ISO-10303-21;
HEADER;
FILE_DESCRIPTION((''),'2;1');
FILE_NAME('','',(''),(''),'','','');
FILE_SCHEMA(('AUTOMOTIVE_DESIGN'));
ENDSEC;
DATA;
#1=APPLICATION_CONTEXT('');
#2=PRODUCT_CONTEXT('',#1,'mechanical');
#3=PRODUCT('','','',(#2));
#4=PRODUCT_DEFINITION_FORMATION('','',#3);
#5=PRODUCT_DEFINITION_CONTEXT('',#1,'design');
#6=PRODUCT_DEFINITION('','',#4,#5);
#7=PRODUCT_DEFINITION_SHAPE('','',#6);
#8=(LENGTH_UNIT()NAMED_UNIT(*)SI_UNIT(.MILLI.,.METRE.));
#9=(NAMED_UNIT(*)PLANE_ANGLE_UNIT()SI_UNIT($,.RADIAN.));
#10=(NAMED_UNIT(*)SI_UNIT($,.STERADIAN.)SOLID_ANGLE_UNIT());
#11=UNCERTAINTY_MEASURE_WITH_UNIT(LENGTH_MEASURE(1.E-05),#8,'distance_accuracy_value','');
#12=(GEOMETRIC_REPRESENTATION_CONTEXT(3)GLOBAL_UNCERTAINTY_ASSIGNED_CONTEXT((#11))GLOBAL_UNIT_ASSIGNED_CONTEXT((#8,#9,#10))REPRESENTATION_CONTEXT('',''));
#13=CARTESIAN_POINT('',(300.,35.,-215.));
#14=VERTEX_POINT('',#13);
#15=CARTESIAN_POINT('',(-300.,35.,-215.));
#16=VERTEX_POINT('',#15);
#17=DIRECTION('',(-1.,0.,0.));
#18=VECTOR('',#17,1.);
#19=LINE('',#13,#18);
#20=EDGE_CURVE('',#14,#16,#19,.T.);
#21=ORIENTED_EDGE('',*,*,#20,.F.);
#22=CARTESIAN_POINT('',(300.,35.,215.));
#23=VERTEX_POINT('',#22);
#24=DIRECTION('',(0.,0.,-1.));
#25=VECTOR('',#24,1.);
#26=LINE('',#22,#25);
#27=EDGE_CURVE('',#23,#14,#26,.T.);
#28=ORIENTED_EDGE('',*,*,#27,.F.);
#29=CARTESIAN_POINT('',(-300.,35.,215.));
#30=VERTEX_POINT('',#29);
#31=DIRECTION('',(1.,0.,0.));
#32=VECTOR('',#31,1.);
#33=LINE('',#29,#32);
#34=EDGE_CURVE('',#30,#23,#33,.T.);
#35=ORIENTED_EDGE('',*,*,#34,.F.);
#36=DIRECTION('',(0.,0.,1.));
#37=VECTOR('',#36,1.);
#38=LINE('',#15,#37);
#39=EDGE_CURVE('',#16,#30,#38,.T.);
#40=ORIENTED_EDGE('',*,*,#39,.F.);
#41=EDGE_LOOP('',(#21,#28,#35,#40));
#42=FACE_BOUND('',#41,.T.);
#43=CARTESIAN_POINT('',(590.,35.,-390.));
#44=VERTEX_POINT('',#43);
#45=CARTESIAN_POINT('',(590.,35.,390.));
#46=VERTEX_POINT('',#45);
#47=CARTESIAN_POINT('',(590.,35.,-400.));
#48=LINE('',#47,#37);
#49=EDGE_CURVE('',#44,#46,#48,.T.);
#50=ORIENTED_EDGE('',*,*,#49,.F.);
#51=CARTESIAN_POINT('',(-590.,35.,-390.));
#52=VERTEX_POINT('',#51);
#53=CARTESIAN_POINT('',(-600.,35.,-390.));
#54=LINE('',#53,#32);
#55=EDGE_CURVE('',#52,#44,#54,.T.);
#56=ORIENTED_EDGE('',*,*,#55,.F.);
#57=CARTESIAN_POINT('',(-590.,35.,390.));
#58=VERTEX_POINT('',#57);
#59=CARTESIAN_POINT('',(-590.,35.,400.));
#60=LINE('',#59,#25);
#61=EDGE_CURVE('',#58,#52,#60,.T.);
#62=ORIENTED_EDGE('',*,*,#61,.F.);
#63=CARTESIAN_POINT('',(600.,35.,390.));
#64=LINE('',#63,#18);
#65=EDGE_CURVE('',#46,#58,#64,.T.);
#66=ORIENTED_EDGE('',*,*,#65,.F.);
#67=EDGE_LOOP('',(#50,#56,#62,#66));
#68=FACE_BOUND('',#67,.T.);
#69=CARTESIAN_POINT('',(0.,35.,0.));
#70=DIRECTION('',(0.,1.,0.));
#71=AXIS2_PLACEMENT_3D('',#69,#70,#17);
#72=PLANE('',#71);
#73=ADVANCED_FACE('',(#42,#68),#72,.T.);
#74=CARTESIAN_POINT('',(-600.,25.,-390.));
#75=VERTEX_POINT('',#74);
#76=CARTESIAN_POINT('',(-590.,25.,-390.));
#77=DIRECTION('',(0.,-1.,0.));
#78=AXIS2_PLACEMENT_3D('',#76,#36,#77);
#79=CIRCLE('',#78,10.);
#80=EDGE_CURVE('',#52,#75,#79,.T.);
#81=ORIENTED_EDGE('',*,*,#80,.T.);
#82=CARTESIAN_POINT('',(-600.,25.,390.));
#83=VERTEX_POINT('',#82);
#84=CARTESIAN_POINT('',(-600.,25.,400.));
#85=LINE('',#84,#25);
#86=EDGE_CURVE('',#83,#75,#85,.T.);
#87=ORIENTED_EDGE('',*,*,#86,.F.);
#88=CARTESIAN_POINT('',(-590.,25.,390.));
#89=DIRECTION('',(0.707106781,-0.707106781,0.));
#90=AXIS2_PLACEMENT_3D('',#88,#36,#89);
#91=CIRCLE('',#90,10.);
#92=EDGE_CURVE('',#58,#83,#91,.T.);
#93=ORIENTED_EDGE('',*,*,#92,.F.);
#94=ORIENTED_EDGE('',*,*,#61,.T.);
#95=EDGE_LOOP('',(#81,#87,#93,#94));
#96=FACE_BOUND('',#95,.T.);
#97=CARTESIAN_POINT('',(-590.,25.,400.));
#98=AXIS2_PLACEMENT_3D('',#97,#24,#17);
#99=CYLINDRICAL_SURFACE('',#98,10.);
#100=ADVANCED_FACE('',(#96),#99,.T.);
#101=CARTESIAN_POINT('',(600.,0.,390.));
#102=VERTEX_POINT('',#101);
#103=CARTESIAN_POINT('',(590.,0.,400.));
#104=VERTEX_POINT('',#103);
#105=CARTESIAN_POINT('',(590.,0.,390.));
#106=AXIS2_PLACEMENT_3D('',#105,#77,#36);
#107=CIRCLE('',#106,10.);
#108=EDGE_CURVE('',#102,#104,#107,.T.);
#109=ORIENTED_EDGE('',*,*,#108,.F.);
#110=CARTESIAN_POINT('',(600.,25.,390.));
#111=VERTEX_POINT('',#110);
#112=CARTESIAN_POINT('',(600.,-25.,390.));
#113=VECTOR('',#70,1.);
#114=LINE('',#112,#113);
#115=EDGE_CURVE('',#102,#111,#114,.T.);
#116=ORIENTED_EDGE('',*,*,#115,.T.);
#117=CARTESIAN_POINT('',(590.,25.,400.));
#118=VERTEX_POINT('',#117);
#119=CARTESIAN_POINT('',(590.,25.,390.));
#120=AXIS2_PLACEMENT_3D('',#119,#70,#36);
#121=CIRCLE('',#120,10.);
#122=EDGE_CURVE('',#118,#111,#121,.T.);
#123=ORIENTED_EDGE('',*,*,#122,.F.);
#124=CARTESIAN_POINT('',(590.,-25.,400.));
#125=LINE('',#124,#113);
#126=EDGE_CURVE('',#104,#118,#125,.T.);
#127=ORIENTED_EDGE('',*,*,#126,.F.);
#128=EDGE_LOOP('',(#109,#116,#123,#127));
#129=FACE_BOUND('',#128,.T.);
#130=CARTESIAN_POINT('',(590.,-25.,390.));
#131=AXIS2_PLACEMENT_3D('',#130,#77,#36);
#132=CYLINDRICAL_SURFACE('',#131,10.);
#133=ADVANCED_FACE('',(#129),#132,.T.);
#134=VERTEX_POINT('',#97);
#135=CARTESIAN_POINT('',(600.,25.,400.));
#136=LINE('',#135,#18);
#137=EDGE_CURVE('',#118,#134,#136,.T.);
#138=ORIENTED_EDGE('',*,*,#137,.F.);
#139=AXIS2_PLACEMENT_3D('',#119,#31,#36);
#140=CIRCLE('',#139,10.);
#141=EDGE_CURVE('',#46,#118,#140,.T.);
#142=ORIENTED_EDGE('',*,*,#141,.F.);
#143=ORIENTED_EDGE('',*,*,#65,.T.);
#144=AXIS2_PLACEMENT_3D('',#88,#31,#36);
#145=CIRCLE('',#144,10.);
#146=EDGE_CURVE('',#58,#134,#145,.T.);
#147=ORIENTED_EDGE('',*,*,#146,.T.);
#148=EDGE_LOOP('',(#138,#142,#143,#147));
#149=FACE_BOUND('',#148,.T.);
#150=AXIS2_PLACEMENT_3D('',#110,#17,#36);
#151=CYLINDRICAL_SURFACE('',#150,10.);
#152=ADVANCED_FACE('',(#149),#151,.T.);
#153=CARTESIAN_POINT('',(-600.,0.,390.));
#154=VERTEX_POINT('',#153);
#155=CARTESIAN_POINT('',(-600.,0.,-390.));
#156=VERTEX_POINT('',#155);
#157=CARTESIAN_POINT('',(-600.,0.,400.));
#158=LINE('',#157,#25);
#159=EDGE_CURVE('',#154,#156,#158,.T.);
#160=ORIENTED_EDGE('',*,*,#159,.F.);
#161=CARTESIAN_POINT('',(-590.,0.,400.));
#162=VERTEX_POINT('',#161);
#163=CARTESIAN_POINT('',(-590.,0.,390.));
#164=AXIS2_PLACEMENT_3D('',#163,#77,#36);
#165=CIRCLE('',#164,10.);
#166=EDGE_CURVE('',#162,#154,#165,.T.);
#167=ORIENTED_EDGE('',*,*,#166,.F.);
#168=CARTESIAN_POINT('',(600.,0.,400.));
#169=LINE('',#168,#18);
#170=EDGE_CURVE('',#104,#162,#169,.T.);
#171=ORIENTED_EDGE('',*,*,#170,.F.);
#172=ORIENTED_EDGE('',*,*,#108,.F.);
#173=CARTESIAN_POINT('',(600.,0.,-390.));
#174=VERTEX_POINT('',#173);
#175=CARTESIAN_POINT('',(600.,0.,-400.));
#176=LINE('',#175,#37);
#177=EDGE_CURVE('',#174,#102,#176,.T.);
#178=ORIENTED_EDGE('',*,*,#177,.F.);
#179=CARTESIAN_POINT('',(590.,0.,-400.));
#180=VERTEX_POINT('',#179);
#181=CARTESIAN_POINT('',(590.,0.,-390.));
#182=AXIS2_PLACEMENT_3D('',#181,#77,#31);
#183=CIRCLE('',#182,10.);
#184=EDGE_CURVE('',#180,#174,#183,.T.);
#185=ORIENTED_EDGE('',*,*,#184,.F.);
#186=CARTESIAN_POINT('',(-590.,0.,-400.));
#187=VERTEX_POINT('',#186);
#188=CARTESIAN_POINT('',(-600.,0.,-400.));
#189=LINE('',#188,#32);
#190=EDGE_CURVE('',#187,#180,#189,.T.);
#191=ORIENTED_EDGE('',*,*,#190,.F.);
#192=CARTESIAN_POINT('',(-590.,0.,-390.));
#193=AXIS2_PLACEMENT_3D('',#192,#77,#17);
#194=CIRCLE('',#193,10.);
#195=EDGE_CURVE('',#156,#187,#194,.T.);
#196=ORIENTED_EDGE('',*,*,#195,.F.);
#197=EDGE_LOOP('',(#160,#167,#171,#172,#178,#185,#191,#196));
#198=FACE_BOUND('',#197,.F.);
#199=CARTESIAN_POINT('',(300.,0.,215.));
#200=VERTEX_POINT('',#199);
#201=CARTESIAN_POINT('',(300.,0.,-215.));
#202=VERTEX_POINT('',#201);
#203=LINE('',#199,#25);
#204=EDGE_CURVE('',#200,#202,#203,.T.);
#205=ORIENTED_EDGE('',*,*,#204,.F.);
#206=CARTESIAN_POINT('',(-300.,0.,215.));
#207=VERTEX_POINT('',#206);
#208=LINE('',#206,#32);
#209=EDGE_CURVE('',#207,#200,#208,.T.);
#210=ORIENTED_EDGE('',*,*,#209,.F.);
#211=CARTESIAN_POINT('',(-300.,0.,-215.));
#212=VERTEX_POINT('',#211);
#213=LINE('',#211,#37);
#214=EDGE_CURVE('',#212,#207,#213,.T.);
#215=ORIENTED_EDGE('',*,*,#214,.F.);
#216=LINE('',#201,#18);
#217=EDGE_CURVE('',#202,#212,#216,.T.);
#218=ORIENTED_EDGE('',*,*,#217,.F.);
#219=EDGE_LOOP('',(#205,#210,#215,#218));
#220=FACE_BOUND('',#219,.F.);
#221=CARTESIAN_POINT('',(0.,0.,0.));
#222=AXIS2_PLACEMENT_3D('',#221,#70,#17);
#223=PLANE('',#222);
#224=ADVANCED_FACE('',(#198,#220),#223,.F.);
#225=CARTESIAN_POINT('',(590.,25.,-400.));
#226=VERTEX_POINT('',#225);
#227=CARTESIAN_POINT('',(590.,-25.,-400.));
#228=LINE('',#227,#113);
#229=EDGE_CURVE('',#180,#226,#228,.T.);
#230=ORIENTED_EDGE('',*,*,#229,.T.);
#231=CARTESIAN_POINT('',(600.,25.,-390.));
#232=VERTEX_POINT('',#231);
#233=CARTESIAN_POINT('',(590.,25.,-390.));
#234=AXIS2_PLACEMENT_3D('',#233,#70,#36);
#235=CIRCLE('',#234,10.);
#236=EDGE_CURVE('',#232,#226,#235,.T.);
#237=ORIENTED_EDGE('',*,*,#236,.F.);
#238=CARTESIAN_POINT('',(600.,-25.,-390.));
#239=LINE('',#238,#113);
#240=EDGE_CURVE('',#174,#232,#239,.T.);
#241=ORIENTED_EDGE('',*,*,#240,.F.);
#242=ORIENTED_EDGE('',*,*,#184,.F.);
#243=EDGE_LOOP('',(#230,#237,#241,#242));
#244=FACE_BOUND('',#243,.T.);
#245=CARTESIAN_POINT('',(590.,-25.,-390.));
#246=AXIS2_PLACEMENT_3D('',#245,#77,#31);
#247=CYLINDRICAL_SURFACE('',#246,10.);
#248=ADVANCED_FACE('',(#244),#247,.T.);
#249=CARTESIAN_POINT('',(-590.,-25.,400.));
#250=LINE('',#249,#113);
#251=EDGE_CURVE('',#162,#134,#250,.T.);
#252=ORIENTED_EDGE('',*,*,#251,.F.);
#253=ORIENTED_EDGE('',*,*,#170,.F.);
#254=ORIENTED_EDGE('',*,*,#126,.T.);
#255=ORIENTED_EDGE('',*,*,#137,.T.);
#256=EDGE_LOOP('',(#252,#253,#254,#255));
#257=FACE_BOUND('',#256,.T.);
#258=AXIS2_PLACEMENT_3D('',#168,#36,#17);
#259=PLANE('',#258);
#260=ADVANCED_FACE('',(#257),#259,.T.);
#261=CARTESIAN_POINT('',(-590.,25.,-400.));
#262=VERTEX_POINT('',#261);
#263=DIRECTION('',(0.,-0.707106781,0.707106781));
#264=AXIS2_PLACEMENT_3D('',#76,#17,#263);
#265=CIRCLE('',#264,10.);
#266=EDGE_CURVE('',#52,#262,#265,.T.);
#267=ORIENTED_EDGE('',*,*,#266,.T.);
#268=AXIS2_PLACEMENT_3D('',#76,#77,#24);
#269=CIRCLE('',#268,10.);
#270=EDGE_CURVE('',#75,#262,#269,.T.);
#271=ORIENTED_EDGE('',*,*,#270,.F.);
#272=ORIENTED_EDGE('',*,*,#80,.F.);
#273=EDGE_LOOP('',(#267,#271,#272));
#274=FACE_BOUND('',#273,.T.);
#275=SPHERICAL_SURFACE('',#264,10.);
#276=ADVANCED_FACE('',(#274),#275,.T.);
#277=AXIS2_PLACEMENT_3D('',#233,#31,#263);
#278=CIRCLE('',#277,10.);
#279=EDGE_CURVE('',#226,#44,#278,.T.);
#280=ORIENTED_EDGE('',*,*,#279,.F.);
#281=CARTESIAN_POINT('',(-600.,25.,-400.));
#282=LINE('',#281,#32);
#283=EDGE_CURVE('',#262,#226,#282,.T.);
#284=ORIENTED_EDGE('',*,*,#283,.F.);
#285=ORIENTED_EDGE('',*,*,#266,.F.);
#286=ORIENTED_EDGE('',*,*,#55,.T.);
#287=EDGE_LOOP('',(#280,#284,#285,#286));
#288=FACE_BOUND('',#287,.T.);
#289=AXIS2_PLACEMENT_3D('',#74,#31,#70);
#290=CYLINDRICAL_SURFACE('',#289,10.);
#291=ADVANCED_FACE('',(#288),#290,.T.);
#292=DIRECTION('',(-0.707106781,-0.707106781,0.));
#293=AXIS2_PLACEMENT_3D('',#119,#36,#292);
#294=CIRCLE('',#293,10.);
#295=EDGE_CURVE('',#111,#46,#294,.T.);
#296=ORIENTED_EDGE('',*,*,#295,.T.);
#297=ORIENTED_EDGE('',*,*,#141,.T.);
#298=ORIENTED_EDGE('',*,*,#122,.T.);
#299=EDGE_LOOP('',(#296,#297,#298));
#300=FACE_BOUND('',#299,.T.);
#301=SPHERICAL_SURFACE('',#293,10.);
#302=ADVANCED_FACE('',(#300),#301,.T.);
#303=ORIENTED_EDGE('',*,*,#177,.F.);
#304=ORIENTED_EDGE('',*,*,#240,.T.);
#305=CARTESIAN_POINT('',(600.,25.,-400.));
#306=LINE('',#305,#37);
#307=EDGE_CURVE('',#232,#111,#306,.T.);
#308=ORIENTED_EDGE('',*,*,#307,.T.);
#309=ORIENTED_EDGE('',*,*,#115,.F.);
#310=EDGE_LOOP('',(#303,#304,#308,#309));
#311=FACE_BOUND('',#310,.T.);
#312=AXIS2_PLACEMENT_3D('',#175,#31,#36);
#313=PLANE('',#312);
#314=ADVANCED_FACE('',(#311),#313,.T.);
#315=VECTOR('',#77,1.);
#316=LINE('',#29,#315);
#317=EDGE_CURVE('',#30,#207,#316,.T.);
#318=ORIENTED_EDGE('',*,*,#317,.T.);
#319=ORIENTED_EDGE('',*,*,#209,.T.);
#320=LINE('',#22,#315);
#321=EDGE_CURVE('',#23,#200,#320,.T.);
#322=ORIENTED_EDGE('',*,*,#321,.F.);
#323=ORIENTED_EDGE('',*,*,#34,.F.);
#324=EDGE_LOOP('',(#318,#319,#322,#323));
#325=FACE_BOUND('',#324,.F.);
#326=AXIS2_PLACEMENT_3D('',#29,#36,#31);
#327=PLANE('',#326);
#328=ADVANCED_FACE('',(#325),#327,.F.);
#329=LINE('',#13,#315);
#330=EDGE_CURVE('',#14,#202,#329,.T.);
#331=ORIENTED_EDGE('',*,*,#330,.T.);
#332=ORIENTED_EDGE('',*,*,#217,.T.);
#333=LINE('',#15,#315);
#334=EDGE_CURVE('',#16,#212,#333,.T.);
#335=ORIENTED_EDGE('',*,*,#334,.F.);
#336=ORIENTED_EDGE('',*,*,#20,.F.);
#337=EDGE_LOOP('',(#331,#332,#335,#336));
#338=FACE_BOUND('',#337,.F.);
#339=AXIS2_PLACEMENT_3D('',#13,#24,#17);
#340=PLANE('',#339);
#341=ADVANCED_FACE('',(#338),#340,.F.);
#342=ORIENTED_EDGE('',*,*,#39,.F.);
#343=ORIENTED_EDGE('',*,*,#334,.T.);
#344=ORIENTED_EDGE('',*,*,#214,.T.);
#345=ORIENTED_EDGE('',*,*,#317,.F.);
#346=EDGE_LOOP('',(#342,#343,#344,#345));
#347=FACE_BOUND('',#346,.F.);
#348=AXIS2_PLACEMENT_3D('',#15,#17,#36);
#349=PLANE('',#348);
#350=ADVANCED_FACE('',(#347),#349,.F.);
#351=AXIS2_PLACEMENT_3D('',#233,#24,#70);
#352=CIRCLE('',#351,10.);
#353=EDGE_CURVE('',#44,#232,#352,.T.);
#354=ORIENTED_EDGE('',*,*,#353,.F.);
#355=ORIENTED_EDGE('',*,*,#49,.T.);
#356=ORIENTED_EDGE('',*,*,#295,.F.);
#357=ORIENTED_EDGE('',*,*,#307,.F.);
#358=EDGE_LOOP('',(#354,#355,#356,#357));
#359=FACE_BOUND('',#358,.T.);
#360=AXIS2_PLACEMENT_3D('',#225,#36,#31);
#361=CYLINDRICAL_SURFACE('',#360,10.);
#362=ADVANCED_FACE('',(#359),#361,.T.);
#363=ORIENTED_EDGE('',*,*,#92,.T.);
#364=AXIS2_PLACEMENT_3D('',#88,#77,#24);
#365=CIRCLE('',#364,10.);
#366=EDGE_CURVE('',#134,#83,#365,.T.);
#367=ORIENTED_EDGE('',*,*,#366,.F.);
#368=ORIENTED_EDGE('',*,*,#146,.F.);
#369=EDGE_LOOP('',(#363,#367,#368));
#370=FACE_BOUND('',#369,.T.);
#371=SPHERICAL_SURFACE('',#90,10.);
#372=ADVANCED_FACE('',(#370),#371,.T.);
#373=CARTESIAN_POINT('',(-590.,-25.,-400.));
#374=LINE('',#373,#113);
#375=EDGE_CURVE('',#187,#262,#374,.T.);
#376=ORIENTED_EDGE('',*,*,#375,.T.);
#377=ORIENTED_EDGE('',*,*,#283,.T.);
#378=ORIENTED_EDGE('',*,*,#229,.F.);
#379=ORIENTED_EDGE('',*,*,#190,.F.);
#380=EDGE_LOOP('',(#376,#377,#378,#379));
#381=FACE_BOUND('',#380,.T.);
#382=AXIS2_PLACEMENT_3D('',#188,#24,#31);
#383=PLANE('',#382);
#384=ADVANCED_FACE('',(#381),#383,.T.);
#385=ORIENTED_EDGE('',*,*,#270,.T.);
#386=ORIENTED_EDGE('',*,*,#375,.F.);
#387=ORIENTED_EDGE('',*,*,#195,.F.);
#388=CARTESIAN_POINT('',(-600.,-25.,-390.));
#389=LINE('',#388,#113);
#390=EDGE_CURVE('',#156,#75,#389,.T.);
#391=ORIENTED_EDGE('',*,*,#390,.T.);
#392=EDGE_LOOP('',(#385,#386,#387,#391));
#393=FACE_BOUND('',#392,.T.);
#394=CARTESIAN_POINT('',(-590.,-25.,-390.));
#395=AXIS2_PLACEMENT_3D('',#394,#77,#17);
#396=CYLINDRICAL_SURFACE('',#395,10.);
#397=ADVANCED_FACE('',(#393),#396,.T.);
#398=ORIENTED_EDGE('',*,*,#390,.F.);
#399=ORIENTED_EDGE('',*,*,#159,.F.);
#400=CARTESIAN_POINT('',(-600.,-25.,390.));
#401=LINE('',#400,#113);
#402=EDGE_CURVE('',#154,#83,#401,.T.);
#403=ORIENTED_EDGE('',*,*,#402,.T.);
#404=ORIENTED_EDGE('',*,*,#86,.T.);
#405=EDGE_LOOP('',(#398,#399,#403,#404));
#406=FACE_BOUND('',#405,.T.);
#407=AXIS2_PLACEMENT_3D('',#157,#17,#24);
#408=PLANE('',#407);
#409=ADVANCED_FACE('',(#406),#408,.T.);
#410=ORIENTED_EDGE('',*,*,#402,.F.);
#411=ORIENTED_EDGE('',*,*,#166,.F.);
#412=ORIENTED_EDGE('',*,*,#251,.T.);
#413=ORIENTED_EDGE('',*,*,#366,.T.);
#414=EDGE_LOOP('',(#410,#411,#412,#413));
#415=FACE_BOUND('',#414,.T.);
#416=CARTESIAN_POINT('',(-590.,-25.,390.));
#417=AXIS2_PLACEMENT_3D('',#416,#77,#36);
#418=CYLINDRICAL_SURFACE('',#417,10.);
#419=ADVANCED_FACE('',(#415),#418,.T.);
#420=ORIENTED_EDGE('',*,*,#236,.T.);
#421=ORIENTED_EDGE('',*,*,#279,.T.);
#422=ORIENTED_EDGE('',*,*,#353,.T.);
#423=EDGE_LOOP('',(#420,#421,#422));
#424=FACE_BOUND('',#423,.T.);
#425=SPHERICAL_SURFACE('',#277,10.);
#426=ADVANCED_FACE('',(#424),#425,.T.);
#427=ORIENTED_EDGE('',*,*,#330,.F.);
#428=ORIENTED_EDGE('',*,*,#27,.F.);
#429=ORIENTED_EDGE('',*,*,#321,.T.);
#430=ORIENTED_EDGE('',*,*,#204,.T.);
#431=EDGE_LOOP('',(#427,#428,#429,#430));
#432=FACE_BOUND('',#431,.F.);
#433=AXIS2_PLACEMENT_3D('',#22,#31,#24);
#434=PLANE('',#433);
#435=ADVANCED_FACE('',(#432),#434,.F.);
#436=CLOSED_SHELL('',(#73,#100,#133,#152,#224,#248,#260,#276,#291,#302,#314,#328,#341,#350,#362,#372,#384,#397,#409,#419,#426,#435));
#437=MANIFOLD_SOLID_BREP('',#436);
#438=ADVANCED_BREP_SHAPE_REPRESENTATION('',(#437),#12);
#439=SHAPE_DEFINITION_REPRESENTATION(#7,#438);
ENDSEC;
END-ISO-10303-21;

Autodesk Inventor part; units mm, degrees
ref_plane "YZ Plane" through (0, 0, 0) normal (1, 0, 0) x (0, 1, 0)
ref_plane "XZ Plane" through (0, 0, 0) normal (0, 1, 0) x (-1, 0, 0)
ref_plane "XY Plane" through (0, 0, 0) normal (0, 0, 1) x (1, 0, 0)
sketch "Sketch1" plane through (0, 0, 0) normal (0, 1, 0) x (-1, 0, 0)
  line L0 (-600, 400) -> (600, 400)
  line L1 (600, 400) -> (600, -400)
  line L2 (600, -400) -> (-600, -400)
  line L3 (-600, -400) -> (-600, 400)
  line L4 (-600, 400) -> (600, -400) construction
  line L5 (600, 400) -> (-600, -400) construction
  point P0 (0, 0)
  dimension "d0" = 1200
  dimension "d1" = 800
extrude "Extrusion1" add sketch "Sketch1" along normal blind 35
sketch "Sketch2" plane through (0, 35, 0) normal (0, 1, 0) x (1, 0, 0)
  line L0 (-300, -215) -> (300, -215)
  line L1 (300, -215) -> (300, 215)
  line L2 (300, 215) -> (-300, 215)
  line L3 (-300, 215) -> (-300, -215)
  line L4 (-300, -215) -> (300, 215) construction
  line L5 (300, -215) -> (-300, 215) construction
  point P0 (0, 0)
  dimension "d8" = 430
  dimension "d9" = 600
extrude "Extrusion2" cut sketch "Sketch2" against normal blind 35
fillet "Fillet2" radius 10 4 edges at (0, 35, 400) (-600, 35, 0) (0, 35, -400) (600, 35, 0)
fillet "Fillet3" radius 10 8 edges at (597.0711, 32.0711, 397.0711) (600, 12.5, 400) (597.0711, 32.0711, -397.0711) (600, 12.5, -400) (-597.0711, 32.0711, 397.0711) (-600, 12.5, 400) (-597.0711, 32.0711, -397.0711) (-600, 12.5, -400)
properties part number "señales_tapa_x10"
